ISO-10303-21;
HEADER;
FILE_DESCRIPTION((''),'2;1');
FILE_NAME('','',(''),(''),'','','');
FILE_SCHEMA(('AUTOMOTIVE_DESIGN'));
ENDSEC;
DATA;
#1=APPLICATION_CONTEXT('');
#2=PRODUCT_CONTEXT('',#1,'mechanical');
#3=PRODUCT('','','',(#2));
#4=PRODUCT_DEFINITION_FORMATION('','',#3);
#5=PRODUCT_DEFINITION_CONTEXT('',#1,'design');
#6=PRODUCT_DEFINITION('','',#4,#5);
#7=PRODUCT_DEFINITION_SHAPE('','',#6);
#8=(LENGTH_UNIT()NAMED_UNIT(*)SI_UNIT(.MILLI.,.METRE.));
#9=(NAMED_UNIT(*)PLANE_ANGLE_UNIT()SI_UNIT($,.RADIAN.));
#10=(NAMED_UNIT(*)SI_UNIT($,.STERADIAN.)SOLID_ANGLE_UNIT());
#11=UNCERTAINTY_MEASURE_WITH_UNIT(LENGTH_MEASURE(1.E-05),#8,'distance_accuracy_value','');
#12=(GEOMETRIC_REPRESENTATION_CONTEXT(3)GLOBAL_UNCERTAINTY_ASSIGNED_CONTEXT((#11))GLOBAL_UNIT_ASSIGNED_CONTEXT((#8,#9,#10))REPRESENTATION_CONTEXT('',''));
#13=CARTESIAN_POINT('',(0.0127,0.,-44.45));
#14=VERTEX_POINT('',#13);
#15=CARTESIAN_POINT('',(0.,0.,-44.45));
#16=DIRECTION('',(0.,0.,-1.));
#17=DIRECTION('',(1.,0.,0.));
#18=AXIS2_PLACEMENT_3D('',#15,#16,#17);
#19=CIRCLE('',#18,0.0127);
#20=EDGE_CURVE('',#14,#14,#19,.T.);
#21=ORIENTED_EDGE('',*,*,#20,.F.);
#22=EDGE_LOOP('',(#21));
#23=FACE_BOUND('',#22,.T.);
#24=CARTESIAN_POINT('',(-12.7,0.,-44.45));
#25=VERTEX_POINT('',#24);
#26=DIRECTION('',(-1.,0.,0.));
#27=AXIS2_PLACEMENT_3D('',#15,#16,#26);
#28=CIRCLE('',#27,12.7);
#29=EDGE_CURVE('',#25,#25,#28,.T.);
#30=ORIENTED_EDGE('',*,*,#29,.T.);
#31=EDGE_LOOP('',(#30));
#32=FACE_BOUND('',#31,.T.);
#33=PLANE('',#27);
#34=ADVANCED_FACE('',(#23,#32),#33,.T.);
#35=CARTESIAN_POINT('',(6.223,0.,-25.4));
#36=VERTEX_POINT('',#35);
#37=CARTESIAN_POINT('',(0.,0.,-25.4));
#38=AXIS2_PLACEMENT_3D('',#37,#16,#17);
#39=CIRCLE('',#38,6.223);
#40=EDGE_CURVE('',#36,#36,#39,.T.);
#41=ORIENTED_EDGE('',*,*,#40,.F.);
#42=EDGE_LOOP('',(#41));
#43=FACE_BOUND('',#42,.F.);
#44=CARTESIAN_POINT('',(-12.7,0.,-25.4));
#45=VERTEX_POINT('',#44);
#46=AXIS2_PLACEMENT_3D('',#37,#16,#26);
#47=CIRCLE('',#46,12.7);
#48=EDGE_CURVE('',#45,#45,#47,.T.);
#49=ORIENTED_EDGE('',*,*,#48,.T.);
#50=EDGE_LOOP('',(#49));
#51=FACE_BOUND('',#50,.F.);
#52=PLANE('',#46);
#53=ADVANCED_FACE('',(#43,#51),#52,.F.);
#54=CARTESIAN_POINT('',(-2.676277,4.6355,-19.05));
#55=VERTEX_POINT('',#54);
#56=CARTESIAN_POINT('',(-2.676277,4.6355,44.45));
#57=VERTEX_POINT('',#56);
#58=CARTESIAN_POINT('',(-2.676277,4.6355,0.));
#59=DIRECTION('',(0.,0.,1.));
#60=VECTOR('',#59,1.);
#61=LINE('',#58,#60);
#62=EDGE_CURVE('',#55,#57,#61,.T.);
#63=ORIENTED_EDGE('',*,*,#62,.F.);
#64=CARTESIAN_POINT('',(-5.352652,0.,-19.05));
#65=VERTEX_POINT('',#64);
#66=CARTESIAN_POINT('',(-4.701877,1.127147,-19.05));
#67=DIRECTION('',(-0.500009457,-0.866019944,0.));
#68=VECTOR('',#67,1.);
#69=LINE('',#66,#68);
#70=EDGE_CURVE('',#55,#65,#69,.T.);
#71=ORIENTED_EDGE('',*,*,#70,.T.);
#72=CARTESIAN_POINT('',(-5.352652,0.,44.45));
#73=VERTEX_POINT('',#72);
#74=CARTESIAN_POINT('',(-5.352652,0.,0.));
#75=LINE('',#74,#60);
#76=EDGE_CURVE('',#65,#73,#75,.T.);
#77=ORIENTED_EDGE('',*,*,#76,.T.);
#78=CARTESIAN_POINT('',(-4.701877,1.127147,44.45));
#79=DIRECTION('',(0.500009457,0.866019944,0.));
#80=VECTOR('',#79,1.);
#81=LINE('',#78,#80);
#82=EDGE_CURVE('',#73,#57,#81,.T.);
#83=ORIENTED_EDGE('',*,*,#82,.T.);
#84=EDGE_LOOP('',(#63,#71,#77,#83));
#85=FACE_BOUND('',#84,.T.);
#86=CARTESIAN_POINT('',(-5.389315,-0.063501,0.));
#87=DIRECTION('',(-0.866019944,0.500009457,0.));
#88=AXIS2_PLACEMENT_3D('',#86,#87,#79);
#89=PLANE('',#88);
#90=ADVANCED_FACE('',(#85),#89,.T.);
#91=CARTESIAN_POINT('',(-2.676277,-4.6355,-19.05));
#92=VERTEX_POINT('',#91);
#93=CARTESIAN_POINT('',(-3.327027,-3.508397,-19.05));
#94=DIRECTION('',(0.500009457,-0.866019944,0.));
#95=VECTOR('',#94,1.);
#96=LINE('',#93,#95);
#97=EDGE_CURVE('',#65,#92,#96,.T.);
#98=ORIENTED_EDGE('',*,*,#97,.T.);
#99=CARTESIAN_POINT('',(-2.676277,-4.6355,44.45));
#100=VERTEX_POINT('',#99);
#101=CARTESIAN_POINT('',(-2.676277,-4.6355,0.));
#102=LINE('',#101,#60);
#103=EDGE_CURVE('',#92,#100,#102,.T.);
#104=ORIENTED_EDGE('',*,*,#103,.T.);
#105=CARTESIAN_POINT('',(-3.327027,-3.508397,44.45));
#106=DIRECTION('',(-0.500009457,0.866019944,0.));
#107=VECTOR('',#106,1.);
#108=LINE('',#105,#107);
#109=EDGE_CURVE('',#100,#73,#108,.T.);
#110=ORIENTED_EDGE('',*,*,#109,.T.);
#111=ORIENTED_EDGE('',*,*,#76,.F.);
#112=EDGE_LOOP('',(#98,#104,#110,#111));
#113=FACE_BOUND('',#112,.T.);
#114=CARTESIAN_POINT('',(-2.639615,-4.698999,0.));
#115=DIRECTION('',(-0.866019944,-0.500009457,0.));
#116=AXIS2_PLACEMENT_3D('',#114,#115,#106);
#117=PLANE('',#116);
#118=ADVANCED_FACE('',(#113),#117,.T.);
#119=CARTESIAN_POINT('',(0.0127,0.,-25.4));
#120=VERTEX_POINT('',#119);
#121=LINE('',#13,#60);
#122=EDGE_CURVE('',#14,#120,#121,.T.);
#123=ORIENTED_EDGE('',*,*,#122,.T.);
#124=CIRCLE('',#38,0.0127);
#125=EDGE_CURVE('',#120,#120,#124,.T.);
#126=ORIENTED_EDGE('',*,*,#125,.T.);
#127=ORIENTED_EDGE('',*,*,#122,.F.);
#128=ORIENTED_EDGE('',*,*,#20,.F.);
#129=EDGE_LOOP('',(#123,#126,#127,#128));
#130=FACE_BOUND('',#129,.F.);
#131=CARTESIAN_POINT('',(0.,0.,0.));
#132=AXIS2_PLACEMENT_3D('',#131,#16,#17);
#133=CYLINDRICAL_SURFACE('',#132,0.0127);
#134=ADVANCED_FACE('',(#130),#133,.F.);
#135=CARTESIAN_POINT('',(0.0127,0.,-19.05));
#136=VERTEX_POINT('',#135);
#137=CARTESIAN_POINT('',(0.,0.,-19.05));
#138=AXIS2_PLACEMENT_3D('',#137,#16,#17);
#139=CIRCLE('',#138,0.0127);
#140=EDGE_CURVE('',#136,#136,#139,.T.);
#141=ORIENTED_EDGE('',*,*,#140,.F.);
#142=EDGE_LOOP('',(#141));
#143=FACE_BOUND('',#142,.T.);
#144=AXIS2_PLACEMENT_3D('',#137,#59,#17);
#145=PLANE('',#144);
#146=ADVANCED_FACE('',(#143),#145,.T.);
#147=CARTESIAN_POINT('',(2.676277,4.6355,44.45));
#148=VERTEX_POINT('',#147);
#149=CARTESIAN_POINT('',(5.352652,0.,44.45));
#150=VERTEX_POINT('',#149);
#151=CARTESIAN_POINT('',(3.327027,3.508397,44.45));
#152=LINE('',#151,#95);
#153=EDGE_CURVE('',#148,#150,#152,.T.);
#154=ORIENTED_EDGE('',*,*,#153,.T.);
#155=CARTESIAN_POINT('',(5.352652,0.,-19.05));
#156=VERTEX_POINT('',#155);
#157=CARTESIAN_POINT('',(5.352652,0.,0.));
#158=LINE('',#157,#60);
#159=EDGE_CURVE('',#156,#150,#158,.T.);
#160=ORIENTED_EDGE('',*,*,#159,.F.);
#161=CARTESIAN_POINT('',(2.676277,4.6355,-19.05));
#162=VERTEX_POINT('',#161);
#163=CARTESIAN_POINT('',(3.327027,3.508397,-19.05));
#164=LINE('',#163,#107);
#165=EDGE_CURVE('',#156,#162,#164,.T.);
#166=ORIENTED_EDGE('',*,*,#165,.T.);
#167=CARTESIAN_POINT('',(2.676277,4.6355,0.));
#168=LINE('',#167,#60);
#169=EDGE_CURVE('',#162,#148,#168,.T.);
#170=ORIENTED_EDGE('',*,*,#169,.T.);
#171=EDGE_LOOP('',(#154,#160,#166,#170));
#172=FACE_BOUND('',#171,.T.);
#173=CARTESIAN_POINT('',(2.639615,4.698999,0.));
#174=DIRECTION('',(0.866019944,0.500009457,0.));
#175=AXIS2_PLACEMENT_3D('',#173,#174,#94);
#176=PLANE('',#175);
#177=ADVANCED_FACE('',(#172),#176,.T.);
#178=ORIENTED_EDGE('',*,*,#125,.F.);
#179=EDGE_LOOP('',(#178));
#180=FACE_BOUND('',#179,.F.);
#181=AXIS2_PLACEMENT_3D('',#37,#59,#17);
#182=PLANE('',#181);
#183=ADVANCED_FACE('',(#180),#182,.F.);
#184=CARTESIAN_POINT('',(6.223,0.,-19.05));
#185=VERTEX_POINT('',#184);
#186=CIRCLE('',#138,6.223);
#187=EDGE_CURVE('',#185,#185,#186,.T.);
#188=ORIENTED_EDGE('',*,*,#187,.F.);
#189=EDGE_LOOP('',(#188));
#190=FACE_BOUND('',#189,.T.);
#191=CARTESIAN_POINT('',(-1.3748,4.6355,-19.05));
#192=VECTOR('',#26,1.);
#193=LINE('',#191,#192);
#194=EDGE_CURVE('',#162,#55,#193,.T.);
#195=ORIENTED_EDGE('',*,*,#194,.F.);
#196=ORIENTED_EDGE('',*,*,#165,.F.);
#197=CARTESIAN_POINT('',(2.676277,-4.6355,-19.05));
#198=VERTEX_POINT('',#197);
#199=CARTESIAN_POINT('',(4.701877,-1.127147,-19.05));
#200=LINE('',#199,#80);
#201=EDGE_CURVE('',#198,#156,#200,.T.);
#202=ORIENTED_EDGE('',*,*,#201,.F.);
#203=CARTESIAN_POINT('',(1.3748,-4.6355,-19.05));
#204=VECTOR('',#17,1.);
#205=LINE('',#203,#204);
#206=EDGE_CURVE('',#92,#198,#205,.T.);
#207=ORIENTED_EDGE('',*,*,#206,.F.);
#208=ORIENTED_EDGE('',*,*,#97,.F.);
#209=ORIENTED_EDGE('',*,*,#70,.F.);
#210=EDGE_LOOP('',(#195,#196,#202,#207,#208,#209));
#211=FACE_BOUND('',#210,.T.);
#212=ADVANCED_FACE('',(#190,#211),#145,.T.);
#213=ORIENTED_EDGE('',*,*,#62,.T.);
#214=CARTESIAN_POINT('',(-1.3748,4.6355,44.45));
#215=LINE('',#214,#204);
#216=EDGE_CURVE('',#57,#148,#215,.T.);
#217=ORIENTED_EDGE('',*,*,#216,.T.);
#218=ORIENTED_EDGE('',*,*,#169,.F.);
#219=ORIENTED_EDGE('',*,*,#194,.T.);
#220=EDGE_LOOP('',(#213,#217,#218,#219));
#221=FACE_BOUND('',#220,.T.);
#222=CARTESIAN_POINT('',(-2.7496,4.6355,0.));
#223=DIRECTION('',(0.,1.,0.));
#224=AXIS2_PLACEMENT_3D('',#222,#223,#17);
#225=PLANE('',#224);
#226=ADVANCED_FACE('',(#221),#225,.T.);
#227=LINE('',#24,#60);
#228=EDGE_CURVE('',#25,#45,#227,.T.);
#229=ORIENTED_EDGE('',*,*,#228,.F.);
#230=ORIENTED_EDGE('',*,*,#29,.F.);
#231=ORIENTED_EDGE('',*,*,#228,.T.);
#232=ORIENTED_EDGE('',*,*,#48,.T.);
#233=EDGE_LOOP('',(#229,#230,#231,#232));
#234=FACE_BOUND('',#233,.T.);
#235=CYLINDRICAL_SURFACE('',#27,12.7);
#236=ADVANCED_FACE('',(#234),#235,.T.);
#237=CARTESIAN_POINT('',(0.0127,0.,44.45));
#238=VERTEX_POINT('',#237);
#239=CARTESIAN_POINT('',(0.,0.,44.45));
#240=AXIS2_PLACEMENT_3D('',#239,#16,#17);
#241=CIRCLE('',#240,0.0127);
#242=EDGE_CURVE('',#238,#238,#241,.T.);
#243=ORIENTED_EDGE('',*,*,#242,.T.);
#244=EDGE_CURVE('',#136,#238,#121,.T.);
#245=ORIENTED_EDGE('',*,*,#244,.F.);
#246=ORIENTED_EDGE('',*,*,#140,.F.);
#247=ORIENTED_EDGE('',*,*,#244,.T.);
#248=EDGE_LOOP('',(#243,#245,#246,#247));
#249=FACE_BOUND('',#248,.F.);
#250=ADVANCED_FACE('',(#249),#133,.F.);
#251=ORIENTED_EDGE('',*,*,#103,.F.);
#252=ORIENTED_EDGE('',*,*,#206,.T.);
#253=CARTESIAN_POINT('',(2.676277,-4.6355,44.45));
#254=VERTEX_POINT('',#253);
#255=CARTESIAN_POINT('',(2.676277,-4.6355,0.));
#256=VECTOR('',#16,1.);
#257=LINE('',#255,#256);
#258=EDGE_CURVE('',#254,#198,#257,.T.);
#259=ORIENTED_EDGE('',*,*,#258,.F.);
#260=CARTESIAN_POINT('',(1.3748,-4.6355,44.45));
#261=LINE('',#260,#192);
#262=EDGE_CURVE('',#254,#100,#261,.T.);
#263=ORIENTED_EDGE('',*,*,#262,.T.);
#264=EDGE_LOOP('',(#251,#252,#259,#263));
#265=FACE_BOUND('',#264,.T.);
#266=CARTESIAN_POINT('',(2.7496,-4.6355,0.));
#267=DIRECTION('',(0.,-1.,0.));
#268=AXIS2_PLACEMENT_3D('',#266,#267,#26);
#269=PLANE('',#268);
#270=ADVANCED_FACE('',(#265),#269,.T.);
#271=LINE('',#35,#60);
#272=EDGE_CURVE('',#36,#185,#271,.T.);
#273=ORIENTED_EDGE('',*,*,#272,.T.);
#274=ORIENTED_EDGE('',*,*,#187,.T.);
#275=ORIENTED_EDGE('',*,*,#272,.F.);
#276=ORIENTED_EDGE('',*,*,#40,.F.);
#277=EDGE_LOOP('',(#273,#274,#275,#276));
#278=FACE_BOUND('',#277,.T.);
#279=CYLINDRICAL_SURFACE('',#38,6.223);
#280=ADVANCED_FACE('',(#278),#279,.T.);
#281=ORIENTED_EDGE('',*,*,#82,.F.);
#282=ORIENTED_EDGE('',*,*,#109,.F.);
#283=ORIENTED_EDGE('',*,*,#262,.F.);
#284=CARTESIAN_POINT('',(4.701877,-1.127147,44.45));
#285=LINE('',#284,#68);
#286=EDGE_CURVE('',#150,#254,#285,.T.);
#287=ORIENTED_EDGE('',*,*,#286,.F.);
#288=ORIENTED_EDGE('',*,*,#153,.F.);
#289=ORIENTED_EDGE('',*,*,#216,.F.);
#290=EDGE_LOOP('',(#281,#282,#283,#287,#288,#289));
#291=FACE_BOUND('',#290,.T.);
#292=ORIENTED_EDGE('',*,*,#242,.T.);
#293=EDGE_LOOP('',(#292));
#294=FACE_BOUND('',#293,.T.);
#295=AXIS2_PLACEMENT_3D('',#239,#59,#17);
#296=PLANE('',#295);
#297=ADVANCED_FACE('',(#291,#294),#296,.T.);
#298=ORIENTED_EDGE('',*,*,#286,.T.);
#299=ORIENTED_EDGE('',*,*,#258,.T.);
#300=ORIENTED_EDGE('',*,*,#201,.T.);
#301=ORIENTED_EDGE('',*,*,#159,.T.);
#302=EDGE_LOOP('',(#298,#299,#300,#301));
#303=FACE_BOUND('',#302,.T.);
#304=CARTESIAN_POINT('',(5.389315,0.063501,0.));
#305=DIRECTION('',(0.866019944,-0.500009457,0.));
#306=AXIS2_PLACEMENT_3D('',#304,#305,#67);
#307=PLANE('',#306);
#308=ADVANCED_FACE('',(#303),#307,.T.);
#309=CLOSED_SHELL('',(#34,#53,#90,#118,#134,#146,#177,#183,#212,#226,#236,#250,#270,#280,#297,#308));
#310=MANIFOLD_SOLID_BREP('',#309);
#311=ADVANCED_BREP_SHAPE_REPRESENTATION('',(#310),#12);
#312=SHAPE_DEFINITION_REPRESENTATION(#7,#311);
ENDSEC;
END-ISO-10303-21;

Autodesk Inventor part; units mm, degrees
ref_plane "YZ Plane" through (0, 0, 0) normal (1, 0, 0) x (0, 1, 0)
ref_plane "XZ Plane" through (0, 0, 0) normal (0, 1, 0) x (-1, 0, 0)
ref_plane "XY Plane" through (0, 0, 0) normal (0, 0, 1) x (1, 0, 0)
sketch "Sketch1" plane through (0, 0, 0) normal (0, 0, 1) x (1, 0, 0)
  line L0 (5.4993, 0) -> (2.7496, -4.7625)
  line L1 (2.7496, -4.7625) -> (-2.7496, -4.7625)
  line L2 (-2.7496, -4.7625) -> (-5.4993, 0)
  line L3 (-5.4993, 0) -> (-2.7496, 4.7625)
  line L4 (-2.7496, 4.7625) -> (2.7496, 4.7625)
  line L5 (2.7496, 4.7625) -> (5.4993, 0)
  circle A0 centre (0, 0) radius 0.0127
  dimension "d0" = 9.525
  dimension "d6" = 0.0254
extrude "Extrusion2" add sketch "Sketch1" along normal mid plane 88.9
sketch "Sketch4" plane through (0, 0, -44.45) normal (0, 0, -1) x (-1, 0, 0)
  circle A0 centre (0, 0) radius 0.0127 projected
  circle A1 centre (0, 0) radius 12.7
  dimension "d10" = 25.4
extrude "Extrusion4" add sketch "Sketch4" against normal blind 19.05
thicken "Reduce Hex Shaft" operation add thickness 0.127 both sides no extend neighbours yes toward (0, -1, 0) faces at (0.9165, 4.7625, -2.1167) (4.5827, 1.5875, -2.1167) (3.6662, -3.175, -2.1167) (-3.6662, 3.175, -2.1167) (-4.5827, -1.5875, -2.1167) (-0.9165, -4.7625, -2.1167)
sketch "Sketch5" plane through (0, 0, -25.4) normal (0, 0, 1) x (1, 0, 0)
  circle A0 centre (0, 0) radius 6.35
  dimension "d15" = 12.7
extrude "Extrusion5" add sketch "Sketch5" along normal blind 6.35
thicken "Reduce Base Bushing" operation add thickness 0.127 both sides no extend neighbours yes toward (-0.9967573, 0.0804666, 0) faces at (6.3294, -0.511, -21.1667)
equation "\"d0\" = hexSize"
equation "\"d4\" = length"
equation "\"d13\" = printOffset"
equation "\"d14\" = printOffset"
equation "\"d15\" = bushingForBaseHole"
equation "\"d16\" = sideOfBase"
equation "\"d20\" = printOffset"
equation "\"d21\" = printOffset"
equation "\"hexSize\" = 9.525"
equation "\"length\" = 88.9"
equation "\"printOffset\" = 0.127"
equation "\"bushingForBaseHole\" = 12.7"
equation "\"sideOfBase\" = 6.35"
properties part number "3_8x3-inchHexShaft"
